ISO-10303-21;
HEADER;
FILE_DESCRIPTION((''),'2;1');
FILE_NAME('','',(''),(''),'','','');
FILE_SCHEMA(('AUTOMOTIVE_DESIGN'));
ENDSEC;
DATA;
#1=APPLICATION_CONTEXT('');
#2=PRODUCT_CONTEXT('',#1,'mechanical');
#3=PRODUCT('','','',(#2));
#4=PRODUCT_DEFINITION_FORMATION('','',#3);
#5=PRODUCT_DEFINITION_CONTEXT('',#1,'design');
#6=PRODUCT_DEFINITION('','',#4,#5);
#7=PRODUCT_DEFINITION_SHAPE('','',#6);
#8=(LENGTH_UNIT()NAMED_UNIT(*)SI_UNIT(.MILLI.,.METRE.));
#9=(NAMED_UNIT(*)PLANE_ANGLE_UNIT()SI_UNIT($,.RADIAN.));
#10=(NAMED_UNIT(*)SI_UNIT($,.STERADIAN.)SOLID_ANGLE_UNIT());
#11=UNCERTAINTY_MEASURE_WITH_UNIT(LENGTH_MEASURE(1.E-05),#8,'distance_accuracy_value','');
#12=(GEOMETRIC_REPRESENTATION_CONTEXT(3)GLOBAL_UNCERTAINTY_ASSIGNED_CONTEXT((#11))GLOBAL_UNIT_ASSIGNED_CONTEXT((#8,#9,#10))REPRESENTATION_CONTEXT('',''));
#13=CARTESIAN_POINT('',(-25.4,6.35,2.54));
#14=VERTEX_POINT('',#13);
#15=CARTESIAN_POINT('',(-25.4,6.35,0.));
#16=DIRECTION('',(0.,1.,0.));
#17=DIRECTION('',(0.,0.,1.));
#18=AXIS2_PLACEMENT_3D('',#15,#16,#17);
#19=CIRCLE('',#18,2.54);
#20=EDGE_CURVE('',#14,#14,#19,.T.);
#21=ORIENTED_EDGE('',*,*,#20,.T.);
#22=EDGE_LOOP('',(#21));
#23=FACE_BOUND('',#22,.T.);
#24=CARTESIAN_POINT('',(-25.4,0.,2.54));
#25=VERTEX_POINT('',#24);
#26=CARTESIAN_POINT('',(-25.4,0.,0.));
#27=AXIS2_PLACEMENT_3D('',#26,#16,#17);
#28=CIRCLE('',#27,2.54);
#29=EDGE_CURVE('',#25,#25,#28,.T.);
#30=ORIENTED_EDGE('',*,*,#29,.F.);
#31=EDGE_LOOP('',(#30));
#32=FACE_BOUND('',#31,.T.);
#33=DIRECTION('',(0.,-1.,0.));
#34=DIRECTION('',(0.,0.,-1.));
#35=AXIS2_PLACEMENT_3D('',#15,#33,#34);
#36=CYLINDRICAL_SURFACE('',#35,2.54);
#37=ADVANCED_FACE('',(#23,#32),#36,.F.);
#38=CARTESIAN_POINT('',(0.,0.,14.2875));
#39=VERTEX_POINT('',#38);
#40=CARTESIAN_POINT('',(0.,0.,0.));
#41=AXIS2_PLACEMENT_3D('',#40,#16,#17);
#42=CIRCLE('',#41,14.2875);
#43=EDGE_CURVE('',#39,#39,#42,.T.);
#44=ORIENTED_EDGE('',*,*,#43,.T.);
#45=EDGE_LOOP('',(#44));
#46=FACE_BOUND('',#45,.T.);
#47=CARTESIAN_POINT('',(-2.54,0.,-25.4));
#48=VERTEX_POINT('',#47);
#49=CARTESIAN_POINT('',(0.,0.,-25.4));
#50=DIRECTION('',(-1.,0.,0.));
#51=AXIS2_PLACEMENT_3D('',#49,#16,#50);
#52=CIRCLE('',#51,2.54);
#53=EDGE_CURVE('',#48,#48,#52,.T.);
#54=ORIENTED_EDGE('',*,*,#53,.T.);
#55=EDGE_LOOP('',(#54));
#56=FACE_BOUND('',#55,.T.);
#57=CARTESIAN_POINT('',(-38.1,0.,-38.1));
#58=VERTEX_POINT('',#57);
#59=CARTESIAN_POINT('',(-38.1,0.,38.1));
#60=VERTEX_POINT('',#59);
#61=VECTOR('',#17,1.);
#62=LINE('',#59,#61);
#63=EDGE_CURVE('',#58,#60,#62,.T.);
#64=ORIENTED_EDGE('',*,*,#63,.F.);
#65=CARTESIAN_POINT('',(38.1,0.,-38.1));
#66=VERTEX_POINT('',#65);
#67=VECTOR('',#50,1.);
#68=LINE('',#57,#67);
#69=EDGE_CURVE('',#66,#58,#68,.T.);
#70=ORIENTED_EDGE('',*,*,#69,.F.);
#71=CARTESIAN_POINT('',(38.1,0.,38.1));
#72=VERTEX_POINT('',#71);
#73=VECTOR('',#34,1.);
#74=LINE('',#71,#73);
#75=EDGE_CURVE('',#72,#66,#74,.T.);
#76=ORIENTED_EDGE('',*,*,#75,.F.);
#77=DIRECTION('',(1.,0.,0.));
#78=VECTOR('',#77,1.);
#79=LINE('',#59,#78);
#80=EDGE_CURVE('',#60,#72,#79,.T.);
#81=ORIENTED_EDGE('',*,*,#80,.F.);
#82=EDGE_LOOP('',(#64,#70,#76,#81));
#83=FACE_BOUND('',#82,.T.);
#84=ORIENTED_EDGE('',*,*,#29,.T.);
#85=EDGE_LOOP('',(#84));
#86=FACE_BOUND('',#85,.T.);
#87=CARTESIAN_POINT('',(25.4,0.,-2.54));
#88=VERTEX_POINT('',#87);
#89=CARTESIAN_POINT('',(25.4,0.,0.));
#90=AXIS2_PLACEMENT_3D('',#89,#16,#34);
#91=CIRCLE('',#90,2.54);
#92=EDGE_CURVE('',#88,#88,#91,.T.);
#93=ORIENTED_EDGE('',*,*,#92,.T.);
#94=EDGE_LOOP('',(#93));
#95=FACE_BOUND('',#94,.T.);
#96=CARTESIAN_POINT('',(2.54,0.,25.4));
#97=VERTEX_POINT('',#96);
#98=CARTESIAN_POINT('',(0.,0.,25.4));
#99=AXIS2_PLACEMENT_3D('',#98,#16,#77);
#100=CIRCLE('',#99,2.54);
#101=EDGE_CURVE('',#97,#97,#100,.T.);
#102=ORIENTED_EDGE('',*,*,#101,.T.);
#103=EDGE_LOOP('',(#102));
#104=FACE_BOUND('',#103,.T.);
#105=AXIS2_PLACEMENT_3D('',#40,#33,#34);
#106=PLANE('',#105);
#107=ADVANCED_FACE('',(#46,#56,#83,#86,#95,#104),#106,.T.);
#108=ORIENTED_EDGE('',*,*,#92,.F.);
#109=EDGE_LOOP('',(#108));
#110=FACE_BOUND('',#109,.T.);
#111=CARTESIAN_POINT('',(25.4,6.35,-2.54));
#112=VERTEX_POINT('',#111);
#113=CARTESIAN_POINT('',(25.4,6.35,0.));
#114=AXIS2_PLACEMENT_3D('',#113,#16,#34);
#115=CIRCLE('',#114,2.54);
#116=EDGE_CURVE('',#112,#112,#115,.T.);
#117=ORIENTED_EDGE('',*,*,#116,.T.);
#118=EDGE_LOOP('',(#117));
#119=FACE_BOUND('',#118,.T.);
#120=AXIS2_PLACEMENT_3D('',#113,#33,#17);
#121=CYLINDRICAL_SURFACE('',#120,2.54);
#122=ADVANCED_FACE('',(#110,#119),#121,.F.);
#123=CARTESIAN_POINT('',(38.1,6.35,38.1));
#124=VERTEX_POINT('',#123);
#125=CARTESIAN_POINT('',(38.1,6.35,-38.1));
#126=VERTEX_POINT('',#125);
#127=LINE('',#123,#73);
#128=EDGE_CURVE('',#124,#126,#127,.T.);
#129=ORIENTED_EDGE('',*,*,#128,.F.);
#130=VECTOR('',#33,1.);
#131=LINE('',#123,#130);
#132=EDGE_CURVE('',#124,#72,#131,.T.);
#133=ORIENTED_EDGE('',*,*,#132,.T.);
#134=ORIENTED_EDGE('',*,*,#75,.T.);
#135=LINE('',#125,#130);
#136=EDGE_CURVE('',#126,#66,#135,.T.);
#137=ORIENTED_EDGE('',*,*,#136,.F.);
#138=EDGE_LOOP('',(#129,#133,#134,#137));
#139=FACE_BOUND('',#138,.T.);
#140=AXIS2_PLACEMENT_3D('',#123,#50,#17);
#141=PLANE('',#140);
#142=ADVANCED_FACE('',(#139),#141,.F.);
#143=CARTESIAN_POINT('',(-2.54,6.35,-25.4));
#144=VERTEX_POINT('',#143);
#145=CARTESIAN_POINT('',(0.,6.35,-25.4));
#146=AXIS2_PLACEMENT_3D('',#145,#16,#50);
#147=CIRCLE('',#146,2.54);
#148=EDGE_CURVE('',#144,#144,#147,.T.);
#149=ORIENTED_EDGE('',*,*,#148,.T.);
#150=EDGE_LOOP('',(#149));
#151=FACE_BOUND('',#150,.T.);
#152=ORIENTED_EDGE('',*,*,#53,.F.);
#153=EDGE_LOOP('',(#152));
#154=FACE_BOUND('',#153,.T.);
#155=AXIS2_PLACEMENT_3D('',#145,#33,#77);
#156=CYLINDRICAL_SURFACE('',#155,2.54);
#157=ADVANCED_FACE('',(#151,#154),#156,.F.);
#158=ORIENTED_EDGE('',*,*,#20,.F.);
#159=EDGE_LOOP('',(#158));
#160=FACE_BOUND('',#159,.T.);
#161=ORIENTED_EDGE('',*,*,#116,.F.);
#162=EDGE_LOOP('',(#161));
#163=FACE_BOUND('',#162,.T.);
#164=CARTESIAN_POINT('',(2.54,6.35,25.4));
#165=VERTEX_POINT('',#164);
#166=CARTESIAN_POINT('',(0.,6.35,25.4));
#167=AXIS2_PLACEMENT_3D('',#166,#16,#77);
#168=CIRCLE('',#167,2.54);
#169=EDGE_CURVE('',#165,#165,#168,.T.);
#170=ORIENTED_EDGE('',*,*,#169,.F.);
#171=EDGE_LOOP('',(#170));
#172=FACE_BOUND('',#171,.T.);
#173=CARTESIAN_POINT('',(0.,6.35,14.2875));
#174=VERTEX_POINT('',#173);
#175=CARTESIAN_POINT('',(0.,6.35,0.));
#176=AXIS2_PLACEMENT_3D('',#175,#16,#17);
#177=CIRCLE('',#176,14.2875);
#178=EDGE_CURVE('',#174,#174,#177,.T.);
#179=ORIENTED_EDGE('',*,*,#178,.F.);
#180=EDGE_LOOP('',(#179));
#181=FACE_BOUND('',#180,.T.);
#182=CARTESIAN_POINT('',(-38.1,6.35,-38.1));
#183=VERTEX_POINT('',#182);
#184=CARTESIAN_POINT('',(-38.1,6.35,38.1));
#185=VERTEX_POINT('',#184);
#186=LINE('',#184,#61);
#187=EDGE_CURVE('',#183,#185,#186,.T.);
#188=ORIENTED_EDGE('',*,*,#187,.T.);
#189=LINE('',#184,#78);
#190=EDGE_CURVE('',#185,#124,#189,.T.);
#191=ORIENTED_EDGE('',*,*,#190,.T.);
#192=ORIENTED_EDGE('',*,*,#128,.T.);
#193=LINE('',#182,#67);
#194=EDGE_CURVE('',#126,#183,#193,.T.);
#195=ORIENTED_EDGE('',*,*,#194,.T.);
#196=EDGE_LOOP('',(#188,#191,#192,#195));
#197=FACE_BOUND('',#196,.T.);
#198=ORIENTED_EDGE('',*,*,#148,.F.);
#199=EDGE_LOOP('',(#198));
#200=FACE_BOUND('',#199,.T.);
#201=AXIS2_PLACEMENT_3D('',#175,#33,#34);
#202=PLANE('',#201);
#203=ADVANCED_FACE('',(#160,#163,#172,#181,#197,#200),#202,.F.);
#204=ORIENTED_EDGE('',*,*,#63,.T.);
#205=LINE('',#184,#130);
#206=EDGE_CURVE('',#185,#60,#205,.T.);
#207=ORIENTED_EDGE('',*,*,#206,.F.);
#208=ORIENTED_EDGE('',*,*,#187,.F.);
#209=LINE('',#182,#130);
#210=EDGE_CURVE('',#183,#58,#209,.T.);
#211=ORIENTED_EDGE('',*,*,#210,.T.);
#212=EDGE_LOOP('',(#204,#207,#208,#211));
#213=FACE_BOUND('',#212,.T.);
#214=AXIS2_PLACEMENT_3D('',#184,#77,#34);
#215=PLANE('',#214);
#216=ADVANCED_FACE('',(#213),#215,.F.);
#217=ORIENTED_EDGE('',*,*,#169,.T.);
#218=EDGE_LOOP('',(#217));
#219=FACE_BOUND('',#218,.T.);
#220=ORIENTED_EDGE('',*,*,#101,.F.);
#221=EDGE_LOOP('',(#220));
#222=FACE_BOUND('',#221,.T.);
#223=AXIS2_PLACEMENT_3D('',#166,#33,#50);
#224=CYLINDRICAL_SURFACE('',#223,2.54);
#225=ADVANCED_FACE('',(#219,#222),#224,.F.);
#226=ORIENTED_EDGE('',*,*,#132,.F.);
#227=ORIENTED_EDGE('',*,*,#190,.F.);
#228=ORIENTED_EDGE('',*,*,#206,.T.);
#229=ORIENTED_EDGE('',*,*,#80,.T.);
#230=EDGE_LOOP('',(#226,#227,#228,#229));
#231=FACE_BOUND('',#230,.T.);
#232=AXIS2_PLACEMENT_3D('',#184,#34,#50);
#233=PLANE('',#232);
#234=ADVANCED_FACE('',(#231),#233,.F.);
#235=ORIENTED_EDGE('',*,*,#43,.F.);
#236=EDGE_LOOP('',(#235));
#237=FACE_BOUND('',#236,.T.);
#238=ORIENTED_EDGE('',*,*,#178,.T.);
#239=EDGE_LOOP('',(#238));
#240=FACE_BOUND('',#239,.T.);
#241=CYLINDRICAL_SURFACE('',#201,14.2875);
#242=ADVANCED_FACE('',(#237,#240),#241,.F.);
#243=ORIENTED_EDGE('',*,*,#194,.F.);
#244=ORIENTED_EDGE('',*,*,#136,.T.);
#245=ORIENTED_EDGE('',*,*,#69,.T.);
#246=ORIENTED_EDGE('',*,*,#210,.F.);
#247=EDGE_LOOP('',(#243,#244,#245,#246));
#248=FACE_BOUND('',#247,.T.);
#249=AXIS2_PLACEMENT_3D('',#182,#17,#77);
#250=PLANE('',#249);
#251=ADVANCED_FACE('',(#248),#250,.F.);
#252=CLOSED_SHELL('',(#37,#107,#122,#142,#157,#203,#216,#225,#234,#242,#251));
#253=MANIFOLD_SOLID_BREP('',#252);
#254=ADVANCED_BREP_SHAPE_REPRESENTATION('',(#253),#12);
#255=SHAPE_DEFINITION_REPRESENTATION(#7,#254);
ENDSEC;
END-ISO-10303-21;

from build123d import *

# Parameters (mm, degrees)
SKETCH1_W                  = 76.2
SKETCH1_H                  = 76.2
SKETCH1_R                  = 14.2875
SKETCH1_R_2                = 2.54
INITIAL_PLATE_DEPTH        = 6.35
MOUNTING_PATTERN_OUTLINE_R = 2.54
MOUNTING_PATTERN_DEPTH     = 6.35


# Read off the part's stored shape, not the designer's step: Mounting Pattern
with BuildPart() as part:
    # Sketch1 → Initial Plate (new body)
    with BuildSketch(Plane(origin=(0, 0, 0), x_dir=(1, 0, 0), z_dir=(0, 1, 0))):
        Rectangle(SKETCH1_W, SKETCH1_H)
        with Locations(Location((0, 0, 0), (0, 0, 270))):
            Circle(SKETCH1_R, mode=Mode.SUBTRACT)
        with Locations(Location((-25.4, 0, 0), (0, 0, 270))):
            Circle(SKETCH1_R_2, mode=Mode.SUBTRACT)
    extrude(amount=INITIAL_PLATE_DEPTH)

    # Mounting Pattern outline → Mounting Pattern (cut)
    with BuildSketch(Plane(origin=(0, 0, 0), x_dir=(1, 0, 0), z_dir=(0, 1, 0))):
        with Locations((0, 25.4)):
            Circle(MOUNTING_PATTERN_OUTLINE_R)
        with Locations((25.4, 0)):
            Circle(MOUNTING_PATTERN_OUTLINE_R)
        with Locations((0, -25.4)):
            Circle(MOUNTING_PATTERN_OUTLINE_R)
    extrude(amount=MOUNTING_PATTERN_DEPTH, mode=Mode.SUBTRACT)


solid = part.part
